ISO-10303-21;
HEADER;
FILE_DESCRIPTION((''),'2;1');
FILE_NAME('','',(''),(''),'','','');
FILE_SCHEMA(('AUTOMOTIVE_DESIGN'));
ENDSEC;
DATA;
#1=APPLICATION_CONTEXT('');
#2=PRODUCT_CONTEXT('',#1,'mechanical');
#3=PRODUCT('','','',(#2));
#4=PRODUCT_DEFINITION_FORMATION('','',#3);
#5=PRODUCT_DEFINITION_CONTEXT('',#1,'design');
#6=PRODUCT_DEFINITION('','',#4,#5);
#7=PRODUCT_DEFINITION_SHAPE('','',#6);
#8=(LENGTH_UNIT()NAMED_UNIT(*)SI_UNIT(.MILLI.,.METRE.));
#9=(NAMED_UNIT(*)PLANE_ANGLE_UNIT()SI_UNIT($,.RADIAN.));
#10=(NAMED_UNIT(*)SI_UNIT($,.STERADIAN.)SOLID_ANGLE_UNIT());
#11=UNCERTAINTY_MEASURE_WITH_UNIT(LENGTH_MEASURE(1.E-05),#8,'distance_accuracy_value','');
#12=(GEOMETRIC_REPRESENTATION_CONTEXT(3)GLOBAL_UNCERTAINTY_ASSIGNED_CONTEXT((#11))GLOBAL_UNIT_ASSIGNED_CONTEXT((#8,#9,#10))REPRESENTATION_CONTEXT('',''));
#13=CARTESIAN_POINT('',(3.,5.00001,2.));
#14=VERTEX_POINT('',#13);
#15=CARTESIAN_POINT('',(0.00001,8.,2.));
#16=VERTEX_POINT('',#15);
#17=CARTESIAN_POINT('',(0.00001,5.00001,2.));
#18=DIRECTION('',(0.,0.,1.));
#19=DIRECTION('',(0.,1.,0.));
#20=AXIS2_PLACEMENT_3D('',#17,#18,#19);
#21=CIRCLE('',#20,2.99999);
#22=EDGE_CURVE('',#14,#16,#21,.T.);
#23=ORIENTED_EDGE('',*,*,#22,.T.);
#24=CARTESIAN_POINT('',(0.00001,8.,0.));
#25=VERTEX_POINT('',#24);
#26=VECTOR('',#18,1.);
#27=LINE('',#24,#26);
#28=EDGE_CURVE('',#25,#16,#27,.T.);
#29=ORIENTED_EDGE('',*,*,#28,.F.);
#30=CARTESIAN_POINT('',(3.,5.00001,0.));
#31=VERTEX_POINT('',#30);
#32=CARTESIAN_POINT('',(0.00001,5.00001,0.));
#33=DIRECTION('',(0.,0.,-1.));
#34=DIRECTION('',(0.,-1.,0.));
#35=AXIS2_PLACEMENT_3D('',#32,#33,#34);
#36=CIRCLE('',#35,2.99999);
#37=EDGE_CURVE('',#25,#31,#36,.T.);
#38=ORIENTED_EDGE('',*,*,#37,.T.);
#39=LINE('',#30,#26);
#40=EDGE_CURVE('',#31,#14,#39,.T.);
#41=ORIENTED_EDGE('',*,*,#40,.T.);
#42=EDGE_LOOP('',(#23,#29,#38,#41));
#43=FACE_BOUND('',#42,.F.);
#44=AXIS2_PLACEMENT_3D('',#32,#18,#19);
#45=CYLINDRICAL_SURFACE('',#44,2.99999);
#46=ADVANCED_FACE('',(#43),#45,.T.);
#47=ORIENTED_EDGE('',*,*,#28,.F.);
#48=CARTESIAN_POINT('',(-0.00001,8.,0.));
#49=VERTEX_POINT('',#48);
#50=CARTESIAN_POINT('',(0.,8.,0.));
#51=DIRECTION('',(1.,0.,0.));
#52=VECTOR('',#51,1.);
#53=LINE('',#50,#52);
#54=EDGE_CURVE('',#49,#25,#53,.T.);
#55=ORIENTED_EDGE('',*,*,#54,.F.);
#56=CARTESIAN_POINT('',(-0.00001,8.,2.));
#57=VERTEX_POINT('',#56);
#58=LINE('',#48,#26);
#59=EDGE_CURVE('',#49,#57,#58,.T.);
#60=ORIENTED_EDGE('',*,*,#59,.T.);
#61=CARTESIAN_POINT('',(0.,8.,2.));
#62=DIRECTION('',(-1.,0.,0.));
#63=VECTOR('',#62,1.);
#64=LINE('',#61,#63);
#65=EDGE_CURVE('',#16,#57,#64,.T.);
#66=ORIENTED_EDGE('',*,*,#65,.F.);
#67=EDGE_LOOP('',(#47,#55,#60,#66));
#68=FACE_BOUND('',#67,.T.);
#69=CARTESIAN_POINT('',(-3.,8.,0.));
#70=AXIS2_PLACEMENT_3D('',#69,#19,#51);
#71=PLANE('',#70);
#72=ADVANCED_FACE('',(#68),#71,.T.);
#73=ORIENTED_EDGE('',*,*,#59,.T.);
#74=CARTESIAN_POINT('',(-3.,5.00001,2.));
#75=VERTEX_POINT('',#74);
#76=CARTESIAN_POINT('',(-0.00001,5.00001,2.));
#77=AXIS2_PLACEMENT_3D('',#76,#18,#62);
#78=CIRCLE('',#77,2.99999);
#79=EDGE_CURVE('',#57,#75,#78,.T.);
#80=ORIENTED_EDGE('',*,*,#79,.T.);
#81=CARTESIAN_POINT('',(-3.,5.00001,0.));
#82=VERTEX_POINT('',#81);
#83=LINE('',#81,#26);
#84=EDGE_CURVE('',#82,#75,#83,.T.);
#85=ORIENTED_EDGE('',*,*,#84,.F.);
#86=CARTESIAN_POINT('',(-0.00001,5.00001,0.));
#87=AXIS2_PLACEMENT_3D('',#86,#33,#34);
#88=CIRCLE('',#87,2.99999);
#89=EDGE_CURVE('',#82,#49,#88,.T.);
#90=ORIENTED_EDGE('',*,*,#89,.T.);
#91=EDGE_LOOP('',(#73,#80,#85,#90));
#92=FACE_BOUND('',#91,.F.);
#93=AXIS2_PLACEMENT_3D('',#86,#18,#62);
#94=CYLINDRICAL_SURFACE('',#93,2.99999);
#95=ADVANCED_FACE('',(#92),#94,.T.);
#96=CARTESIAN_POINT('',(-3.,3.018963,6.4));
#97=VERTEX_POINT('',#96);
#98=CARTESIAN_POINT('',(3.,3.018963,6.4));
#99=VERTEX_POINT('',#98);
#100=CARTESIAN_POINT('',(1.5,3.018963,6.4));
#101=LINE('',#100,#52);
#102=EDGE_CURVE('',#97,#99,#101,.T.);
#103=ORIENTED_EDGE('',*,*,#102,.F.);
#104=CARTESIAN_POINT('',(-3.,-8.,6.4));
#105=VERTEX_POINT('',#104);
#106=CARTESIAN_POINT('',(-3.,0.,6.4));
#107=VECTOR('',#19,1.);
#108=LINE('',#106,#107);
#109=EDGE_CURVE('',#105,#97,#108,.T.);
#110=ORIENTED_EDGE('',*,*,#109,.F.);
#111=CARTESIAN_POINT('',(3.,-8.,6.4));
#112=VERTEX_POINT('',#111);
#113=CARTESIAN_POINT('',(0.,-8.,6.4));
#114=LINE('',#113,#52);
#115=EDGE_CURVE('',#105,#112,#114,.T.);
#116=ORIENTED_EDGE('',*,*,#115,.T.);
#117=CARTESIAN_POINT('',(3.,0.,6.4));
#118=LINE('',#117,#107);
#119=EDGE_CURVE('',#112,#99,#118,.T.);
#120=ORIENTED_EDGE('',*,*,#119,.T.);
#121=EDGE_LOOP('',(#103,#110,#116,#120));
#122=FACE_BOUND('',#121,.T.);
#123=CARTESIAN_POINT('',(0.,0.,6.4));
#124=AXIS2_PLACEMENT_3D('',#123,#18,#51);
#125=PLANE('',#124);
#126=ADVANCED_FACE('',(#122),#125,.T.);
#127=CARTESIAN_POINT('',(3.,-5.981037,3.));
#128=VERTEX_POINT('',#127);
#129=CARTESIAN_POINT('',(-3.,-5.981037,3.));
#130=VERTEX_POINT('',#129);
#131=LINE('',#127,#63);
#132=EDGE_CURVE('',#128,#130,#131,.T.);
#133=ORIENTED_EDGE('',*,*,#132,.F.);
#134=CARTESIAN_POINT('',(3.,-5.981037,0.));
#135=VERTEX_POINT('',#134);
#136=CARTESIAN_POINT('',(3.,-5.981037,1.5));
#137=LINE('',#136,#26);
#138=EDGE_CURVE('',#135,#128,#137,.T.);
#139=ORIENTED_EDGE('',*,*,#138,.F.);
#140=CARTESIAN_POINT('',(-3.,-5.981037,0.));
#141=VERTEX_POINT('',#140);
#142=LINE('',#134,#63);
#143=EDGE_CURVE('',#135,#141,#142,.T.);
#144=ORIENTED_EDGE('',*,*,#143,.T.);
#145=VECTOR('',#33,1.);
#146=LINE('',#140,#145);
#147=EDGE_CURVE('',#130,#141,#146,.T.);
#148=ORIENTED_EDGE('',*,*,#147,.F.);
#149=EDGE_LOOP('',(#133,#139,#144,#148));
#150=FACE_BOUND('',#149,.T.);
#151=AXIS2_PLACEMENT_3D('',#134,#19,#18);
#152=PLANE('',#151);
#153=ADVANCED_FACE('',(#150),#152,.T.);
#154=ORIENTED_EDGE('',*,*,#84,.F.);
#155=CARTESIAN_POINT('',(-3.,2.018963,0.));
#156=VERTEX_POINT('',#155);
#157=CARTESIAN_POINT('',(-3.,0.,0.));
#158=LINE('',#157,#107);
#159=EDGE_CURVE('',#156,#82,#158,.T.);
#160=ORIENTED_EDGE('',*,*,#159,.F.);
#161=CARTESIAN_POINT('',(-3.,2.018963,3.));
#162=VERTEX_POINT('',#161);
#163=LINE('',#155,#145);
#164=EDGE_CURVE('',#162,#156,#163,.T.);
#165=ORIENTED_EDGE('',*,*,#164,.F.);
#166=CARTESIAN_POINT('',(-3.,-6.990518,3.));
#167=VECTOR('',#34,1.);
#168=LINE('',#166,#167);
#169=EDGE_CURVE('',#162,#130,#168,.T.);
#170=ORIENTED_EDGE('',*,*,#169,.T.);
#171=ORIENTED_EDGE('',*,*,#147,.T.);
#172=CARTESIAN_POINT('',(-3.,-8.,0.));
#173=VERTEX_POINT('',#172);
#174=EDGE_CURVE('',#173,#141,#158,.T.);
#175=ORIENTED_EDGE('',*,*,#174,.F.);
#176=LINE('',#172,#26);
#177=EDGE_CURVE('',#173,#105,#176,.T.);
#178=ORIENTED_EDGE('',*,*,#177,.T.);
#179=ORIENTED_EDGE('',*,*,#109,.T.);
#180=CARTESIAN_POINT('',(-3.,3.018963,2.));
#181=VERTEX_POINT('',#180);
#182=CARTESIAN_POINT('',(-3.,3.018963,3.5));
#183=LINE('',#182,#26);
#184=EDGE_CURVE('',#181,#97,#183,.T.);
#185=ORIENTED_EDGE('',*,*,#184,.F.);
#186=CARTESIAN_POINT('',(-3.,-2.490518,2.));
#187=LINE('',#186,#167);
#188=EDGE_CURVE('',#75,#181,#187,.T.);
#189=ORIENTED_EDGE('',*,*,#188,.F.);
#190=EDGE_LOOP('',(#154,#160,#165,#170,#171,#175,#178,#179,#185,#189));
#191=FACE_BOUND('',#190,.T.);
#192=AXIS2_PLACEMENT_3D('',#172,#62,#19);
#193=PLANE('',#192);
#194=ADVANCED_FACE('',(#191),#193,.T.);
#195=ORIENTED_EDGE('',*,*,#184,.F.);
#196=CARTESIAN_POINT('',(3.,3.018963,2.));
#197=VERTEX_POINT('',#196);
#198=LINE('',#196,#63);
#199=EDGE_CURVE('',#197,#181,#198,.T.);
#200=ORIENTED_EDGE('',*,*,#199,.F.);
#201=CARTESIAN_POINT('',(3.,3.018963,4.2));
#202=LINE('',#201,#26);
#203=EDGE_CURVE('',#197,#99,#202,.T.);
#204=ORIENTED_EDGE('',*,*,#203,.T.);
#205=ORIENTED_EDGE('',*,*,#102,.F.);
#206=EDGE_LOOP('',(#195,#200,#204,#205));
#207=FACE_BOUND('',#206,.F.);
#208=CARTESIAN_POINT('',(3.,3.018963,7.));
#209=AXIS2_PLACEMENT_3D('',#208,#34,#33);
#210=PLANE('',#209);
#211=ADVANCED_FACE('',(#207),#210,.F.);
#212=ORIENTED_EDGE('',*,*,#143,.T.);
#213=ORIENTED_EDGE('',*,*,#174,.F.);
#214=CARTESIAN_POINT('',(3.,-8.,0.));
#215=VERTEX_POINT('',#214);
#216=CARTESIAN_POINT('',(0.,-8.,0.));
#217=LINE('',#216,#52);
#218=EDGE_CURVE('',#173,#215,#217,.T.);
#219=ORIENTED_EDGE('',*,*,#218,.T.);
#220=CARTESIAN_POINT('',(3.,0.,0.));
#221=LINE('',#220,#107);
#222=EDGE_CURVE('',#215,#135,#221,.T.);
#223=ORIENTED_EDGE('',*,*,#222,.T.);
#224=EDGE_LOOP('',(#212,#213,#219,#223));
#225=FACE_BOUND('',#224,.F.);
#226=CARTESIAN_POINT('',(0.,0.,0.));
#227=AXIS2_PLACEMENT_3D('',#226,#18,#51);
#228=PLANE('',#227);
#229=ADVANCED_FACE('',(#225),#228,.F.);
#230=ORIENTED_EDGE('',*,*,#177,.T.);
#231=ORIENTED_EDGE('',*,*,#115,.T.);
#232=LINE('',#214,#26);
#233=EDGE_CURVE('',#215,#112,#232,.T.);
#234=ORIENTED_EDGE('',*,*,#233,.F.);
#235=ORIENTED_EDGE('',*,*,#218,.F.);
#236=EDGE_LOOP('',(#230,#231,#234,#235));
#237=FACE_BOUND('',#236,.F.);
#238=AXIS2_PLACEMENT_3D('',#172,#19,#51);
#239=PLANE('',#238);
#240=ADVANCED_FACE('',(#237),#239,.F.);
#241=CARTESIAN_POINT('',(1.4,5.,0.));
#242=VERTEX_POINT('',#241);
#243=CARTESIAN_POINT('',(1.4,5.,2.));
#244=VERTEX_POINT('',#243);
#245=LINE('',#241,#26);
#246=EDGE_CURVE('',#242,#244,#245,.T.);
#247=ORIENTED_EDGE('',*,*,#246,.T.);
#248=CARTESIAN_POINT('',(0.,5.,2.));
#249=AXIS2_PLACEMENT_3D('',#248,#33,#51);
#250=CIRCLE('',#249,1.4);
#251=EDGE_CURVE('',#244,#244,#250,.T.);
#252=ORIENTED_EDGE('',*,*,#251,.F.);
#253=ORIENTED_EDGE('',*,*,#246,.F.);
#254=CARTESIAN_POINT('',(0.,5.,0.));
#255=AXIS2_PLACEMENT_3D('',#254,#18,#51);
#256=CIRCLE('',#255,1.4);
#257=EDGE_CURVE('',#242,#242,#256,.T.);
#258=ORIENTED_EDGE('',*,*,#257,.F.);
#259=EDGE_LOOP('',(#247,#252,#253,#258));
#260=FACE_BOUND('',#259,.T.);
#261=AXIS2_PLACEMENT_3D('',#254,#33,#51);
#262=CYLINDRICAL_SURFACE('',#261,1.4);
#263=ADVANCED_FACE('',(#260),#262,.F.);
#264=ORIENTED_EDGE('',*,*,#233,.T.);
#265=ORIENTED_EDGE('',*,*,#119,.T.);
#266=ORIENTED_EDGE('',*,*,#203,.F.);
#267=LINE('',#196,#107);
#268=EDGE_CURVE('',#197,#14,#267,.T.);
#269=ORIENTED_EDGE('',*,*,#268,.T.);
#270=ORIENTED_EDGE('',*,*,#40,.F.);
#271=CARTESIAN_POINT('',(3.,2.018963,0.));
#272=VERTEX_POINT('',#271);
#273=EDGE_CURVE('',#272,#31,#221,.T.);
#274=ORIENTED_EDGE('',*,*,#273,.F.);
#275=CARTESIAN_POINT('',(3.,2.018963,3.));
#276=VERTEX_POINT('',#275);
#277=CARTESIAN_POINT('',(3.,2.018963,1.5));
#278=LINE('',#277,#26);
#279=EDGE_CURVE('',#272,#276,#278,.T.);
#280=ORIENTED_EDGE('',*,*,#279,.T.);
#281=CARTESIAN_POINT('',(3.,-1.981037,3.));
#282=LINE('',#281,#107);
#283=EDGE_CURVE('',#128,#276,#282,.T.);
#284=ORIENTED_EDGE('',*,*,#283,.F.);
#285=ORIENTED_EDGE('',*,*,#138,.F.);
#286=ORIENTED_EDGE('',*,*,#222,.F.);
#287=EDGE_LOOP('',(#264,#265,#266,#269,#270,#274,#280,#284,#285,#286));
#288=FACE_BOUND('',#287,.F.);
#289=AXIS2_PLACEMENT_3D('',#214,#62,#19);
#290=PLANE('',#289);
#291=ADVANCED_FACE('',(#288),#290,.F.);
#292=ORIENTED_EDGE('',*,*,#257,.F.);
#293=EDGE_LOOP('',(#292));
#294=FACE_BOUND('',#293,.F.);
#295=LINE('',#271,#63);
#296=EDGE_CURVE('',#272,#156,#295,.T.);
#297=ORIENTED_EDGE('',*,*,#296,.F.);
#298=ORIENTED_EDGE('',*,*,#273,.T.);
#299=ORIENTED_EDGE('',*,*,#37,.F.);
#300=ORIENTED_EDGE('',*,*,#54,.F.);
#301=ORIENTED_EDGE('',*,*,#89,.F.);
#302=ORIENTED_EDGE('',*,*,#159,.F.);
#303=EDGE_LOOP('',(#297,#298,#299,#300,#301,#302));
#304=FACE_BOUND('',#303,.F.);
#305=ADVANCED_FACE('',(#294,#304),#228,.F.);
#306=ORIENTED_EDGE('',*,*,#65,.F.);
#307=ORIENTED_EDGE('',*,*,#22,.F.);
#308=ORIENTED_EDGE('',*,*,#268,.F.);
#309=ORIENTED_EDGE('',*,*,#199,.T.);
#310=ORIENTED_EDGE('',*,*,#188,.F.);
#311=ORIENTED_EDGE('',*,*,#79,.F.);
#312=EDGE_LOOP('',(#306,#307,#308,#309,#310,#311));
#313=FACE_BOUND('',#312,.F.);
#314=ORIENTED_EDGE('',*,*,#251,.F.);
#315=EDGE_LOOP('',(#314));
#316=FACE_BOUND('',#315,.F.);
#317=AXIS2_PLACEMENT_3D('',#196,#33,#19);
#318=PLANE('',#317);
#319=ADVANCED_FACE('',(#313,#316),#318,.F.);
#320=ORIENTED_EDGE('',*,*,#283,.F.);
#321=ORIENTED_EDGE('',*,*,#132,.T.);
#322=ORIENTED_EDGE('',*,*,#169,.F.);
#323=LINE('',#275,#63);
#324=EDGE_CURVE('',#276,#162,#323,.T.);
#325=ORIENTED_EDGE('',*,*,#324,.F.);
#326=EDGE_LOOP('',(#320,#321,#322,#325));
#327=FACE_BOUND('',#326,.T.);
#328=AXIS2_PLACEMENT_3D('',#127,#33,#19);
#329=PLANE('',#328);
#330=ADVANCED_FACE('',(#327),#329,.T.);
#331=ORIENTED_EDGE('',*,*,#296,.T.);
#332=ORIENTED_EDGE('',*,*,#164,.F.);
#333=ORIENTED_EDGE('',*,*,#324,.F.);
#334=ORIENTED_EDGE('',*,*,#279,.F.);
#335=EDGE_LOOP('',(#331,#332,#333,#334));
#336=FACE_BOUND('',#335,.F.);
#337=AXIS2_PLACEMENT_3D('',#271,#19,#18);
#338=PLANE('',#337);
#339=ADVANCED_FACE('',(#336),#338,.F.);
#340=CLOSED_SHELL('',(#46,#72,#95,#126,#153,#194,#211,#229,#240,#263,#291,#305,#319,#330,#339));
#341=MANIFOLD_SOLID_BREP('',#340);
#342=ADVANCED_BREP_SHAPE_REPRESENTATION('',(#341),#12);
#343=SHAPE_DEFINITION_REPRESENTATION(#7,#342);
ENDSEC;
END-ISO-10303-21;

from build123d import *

# Parameters (mm, degrees)
F0_W     = 6
F0_H     = 16
F0_R     = 1.4
F1_DEPTH = 6.4
F2_R     = 2.99999
F3_W     = 1.9810468791
F3_H     = 4.4
F3_W_2   = 8
F3_H_2   = 3
F4_DEPTH = 8


# Not quite as in the source:
# - a fillet or chamfer is up to 0.001 mm smaller than in the source, because OpenCascade refuses the exact size


with BuildPart() as f1:
    # F0 (on Top) → F1 (new body)
    with BuildSketch(Plane.XY):
        Rectangle(F0_W, F0_H)
        with Locations((0, 5)):
            Circle(F0_R, mode=Mode.SUBTRACT)
    extrude(amount=F1_DEPTH)

    # F2 (radius 3 in the source; OpenCascade refuses exactly that, so slightly less here)
    f2_edges = [f1.edges().sort_by_distance(p)[0] for p in [
        (3, 8, 3.2),
        (-3, 8, 3.2),
    ]]
    fillet(f2_edges, radius=F2_R)

    # F3 (on face) → F4 (cut)
    with BuildSketch(Plane.YZ.offset(3)):
        Polygon((5.00001, 6.4), (5.00001, 2), (8.0189631209, 2), (8.0189631209, 7), (3.0189631209, 7), (3.0189631209, 6.4), align=None)
        with Locations((4.0094865604, 4.2)):
            Rectangle(F3_W, F3_H)
        with Locations((-1.9810368791, 1.5)):
            Rectangle(F3_W_2, F3_H_2)
    extrude(amount=-F4_DEPTH, mode=Mode.SUBTRACT)


solid = f1.part
